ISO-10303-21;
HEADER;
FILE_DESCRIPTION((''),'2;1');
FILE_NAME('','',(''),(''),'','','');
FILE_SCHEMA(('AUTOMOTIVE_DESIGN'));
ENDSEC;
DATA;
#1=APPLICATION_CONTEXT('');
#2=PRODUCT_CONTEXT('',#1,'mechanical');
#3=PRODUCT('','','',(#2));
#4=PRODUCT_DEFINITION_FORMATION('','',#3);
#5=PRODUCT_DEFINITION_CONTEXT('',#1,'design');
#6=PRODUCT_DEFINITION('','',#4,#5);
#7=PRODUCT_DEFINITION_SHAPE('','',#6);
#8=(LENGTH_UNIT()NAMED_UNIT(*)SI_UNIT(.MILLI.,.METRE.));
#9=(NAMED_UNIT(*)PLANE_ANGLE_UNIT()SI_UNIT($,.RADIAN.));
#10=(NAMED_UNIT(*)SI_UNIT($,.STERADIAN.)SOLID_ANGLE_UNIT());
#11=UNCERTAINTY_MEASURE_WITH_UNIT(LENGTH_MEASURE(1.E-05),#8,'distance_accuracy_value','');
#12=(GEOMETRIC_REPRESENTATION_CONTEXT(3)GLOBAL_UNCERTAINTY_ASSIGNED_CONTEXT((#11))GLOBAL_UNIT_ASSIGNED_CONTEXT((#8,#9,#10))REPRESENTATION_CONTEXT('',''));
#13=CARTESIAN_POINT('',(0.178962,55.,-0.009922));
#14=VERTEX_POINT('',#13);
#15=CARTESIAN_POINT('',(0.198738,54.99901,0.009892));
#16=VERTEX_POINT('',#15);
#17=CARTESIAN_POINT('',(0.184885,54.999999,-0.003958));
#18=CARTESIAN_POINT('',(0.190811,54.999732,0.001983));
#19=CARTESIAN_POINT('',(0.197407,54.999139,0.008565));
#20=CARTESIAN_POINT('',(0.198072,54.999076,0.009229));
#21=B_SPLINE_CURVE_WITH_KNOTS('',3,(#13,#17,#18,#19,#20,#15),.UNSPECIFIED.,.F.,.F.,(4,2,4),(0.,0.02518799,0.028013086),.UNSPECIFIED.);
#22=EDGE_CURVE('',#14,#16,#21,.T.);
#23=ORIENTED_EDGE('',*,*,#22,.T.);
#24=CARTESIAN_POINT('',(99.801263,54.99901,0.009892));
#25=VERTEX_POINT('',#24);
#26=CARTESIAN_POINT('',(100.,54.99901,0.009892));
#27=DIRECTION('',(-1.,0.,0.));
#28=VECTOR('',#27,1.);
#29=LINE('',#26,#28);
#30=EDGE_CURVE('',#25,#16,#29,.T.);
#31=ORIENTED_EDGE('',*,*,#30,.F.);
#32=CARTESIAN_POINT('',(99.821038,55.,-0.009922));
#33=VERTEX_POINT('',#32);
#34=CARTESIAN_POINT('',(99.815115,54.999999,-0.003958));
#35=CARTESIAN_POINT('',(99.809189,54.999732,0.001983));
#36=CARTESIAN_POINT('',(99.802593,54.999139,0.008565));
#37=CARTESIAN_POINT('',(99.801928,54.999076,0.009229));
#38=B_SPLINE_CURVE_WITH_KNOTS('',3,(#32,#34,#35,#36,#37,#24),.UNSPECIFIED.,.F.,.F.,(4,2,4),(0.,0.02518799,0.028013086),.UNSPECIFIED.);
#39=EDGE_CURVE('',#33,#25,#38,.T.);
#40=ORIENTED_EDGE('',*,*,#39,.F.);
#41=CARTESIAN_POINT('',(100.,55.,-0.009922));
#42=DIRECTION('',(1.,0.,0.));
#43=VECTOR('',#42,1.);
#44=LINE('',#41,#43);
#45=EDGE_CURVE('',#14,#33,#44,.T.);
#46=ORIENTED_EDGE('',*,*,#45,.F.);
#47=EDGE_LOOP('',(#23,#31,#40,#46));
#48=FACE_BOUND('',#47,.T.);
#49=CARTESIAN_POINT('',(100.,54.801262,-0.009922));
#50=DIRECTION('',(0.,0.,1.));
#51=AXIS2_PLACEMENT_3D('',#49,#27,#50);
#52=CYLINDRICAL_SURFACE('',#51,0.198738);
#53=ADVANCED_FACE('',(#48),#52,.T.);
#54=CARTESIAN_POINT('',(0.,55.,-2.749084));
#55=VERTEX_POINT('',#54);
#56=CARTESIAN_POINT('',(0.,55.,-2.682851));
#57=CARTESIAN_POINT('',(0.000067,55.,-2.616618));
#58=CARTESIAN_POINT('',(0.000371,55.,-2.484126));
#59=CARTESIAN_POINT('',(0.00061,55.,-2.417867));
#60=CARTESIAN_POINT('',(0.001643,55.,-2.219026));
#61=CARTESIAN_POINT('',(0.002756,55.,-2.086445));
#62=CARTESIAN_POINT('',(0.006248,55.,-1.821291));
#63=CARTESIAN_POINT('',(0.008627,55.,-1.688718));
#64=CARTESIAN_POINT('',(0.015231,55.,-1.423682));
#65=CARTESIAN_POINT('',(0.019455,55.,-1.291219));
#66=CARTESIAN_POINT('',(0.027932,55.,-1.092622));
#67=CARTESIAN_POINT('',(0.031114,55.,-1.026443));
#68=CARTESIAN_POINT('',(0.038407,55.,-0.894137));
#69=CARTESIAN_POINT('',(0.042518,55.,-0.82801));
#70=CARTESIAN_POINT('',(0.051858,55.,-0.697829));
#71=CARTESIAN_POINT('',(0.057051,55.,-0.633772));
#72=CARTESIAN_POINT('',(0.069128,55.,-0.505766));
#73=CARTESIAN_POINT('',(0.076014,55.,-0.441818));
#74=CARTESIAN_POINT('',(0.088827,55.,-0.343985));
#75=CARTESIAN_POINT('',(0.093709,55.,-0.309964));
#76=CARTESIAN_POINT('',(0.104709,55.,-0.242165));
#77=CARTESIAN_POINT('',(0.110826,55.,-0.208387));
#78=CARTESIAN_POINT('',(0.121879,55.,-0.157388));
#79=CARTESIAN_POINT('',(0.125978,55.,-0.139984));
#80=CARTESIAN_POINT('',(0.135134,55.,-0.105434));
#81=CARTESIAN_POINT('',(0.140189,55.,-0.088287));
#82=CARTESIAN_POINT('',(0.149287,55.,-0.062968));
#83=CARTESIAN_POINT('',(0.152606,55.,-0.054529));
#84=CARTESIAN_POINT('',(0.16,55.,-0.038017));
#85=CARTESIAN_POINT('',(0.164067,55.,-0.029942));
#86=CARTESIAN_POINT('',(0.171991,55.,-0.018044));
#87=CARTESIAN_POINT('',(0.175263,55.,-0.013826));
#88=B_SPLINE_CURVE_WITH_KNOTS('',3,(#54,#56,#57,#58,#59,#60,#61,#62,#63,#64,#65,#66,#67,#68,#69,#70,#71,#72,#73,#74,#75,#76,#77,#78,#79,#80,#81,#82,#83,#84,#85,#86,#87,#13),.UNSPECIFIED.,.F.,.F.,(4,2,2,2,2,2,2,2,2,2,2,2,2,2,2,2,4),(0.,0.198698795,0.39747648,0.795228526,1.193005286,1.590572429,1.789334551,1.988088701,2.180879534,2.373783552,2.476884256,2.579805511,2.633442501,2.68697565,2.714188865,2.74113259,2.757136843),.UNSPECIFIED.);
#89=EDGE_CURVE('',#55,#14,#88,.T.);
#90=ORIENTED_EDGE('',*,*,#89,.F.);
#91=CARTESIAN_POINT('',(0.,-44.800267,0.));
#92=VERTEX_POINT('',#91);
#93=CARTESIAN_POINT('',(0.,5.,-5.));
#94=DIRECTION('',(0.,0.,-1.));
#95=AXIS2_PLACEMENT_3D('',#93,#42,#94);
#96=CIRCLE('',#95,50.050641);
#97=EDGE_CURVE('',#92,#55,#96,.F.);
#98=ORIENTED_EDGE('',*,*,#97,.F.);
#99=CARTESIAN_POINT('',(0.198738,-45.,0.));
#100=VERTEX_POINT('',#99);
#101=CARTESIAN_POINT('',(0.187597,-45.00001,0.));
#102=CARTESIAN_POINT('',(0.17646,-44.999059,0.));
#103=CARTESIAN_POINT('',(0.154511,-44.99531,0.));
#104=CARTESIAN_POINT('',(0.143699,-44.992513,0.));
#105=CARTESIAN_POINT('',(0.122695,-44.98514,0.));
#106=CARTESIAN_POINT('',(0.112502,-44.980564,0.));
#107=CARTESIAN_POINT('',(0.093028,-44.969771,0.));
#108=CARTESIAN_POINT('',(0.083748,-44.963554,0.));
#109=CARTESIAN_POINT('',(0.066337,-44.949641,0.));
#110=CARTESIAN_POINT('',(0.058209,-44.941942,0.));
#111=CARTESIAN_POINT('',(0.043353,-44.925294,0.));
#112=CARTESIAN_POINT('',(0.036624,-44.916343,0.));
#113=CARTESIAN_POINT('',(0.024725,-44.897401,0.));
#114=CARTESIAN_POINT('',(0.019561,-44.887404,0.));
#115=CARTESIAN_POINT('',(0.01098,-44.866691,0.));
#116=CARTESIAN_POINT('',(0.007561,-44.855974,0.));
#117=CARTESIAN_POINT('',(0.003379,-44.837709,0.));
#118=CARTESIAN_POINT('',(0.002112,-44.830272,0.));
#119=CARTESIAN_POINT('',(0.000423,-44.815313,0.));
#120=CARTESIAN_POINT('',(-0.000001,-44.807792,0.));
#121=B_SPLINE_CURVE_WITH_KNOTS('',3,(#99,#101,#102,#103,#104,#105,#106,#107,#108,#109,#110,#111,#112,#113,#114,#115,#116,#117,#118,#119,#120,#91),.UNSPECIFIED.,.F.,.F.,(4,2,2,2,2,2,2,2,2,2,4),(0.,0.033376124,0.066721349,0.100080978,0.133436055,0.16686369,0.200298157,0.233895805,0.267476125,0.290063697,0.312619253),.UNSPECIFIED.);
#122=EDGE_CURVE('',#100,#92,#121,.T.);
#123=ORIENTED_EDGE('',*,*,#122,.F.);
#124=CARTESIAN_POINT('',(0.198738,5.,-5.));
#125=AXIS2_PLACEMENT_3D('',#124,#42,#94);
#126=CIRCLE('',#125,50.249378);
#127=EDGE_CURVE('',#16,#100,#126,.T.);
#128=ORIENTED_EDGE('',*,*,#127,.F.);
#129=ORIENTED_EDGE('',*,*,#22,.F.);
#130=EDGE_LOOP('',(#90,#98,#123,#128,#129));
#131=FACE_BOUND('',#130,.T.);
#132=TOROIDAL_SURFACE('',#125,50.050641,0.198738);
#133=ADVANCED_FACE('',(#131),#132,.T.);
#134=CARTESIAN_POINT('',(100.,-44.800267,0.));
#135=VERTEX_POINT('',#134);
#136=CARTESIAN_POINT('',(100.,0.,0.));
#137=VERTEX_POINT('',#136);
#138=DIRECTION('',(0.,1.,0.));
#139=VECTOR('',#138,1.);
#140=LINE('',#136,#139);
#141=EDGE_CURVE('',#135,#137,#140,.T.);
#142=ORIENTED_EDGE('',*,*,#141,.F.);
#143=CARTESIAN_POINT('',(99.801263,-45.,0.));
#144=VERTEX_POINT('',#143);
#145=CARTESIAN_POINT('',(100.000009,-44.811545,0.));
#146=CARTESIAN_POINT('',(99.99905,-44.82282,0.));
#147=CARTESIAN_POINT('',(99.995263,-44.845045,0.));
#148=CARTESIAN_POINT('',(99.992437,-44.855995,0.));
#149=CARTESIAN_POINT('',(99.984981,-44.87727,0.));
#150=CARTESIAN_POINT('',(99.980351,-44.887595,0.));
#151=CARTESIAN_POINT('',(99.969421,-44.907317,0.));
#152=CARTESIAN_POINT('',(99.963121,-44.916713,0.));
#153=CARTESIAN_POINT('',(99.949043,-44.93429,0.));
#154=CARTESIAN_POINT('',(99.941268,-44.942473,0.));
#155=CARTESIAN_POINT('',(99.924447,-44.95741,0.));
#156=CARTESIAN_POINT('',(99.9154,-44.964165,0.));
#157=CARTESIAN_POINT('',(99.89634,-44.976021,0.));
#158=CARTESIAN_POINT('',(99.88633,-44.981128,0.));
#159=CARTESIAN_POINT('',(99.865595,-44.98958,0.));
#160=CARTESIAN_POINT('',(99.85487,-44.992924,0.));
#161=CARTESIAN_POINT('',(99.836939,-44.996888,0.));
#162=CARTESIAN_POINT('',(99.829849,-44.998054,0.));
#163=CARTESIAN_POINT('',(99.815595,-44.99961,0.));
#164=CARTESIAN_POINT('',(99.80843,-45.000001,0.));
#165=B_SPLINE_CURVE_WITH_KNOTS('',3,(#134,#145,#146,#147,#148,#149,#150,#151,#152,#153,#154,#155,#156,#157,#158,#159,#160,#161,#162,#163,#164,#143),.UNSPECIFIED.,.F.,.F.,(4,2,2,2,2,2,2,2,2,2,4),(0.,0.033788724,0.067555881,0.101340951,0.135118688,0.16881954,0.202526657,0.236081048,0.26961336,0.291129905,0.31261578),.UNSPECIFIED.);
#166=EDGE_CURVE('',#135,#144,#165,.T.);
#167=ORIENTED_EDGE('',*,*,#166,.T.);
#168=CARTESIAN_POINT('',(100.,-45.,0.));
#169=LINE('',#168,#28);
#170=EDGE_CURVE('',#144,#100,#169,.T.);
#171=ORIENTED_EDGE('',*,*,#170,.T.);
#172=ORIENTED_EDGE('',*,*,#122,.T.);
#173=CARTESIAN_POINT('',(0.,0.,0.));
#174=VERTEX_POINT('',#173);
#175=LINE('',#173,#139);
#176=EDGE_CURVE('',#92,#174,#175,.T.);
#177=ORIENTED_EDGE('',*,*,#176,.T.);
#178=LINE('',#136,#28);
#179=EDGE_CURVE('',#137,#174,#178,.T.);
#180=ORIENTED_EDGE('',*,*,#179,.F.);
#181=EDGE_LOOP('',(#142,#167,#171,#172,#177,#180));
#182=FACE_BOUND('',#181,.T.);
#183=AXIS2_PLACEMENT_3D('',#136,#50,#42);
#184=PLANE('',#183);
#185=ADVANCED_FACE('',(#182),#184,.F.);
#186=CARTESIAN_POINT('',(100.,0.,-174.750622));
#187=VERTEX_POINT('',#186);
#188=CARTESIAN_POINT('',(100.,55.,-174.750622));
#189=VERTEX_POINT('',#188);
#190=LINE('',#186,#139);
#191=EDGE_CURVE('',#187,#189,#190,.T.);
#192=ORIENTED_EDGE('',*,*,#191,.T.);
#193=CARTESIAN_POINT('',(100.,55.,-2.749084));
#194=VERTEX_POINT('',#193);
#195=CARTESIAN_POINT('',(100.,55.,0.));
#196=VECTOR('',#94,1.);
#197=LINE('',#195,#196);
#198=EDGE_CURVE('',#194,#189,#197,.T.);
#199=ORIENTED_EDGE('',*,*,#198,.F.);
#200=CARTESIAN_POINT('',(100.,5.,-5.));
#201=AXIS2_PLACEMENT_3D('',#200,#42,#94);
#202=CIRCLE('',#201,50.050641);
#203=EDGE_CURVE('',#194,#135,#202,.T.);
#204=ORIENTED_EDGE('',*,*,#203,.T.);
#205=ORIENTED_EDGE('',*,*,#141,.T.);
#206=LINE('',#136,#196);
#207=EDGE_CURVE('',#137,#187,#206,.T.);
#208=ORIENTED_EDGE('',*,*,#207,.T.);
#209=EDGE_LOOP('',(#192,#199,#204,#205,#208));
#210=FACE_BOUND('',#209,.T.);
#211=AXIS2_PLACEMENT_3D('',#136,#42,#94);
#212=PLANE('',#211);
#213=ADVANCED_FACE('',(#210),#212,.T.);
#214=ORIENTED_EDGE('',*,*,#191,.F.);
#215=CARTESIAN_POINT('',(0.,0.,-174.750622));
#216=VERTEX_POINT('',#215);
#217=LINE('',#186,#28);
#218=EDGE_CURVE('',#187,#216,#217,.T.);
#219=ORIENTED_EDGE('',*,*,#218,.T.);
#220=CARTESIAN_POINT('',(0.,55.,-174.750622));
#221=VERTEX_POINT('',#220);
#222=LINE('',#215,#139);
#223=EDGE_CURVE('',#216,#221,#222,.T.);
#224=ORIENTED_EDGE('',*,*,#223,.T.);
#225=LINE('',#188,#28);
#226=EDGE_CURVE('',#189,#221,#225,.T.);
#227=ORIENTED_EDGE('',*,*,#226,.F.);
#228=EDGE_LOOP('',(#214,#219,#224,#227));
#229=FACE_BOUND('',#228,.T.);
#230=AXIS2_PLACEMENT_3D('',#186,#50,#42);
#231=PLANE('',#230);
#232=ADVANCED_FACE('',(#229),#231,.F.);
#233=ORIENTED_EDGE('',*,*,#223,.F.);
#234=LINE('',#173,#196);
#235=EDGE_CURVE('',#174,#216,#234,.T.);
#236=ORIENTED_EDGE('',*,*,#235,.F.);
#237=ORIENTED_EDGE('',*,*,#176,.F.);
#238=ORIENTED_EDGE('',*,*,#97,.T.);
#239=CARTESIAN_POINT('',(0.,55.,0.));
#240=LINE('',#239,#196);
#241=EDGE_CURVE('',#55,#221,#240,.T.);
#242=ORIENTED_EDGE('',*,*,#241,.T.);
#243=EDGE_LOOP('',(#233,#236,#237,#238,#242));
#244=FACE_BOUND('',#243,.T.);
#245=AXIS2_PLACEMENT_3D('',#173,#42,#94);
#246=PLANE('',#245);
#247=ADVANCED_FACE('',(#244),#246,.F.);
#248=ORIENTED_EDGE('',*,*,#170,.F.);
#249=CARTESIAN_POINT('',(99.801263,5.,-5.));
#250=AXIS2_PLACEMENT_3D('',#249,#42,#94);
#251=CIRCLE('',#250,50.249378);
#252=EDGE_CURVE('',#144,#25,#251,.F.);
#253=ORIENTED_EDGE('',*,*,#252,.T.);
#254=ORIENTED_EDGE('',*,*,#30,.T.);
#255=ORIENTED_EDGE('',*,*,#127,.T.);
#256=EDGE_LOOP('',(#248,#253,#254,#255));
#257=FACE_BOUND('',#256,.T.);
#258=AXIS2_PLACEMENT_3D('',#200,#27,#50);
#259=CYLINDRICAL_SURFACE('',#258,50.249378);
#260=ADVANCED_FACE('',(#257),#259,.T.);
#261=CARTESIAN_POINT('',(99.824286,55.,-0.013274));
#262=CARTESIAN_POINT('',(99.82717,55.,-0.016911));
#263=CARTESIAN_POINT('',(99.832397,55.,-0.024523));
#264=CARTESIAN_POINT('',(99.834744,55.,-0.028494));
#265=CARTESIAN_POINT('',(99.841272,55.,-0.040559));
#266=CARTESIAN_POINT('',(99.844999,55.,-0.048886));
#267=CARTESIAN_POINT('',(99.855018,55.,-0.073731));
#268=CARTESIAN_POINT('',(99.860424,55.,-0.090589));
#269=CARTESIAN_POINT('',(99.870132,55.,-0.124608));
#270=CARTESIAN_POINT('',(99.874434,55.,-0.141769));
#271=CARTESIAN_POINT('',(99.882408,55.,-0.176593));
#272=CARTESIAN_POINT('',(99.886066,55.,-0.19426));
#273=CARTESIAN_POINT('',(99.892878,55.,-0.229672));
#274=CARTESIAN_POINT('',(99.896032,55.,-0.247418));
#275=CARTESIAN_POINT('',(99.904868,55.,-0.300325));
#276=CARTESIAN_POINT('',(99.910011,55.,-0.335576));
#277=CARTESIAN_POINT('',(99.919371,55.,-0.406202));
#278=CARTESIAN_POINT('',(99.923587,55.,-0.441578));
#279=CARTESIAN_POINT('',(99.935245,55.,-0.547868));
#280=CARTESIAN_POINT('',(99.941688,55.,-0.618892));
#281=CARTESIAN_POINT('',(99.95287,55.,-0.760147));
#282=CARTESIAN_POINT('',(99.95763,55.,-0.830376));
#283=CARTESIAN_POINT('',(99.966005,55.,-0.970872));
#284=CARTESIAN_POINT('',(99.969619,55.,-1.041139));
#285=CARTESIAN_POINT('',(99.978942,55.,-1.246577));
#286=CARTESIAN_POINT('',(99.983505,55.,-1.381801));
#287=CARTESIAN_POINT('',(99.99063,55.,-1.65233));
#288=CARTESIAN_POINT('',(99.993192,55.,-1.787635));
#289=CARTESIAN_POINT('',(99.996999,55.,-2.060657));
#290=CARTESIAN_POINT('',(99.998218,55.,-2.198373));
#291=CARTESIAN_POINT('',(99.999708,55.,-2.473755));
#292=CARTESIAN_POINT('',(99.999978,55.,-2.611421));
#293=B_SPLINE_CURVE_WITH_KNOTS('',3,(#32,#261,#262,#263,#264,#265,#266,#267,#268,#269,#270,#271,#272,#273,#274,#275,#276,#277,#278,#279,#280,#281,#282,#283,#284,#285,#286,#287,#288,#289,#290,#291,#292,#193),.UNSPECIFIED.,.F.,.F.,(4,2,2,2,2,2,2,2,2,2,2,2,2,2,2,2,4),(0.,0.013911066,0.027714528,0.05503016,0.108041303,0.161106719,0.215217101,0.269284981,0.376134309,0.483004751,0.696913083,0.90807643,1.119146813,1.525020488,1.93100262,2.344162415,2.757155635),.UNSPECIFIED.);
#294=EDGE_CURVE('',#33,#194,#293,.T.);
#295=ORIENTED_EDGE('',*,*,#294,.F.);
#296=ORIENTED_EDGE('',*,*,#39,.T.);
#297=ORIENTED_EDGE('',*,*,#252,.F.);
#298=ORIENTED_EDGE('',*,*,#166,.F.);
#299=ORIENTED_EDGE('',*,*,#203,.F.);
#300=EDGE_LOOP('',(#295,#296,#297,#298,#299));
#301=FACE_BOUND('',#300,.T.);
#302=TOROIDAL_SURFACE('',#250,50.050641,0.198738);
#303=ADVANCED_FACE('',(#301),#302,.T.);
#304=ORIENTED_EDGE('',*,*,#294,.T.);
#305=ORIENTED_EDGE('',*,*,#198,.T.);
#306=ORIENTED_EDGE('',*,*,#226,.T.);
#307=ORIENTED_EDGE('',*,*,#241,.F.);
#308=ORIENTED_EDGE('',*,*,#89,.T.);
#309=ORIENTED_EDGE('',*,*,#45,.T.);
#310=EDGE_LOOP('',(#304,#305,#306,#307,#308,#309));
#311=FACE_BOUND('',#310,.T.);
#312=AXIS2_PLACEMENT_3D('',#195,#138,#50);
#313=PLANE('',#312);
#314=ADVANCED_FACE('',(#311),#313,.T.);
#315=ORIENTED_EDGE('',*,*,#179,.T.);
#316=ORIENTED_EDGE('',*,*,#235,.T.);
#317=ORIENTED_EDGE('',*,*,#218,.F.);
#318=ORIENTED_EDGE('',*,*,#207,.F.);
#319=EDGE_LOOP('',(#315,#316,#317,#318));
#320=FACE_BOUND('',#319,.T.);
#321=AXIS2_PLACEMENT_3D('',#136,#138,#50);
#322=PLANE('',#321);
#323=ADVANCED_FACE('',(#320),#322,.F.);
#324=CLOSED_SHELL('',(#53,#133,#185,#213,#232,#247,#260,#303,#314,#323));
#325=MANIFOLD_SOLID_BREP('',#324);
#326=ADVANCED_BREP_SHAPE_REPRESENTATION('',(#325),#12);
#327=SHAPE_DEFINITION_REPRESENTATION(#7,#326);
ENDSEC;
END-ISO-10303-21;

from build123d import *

# Parameters (mm, degrees)
SKETCH2_W           = 174.75062189439555
SKETCH2_H           = 55.00000000000001
BOSS_EXTRUDE1_DEPTH = 100
FILLET1_ANGLE       = 171.711787


with BuildPart() as part:
    # Sketch2 → Boss-Extrude1 (new body)
    with BuildSketch(Plane(origin=(0, 0, 0), x_dir=(0, 0, -1), z_dir=(1, 0, 0))):
        with Locations((87.37531094719778, 27.500000000000004)):
            Rectangle(SKETCH2_W, SKETCH2_H)
        with BuildLine():
            Line((0, 0), (0, 55.00000000000001))
            ThreePointArc((0, 55.00000000000001), (-45.24937810560445, 5.000000000000011), (5.51e-15, -45))
            Line((5.51e-15, -45), (0, 0))
        make_face()
    extrude(amount=BOSS_EXTRUDE1_DEPTH)

    # Fillet1: read off the stored shape, not the designer's step
    # Fillet1 outline → Fillet1 (revolve, cut)
    with BuildSketch(Plane(origin=(0, 5, -5), x_dir=(0, 0.998988212638407, 0.04497278076260073), z_dir=(0, 0.04497278076260073, -0.998988212638407))):
        with BuildLine():
            ThreePointArc((50.249378106, 0.1987375), (50.19116924, 0.058208866), (50.050640606, 0))
            Line((50.050640606, 0), (50.249378106, 0))
            Line((50.249378106, 0), (50.249378106, 0.1987375))
        make_face()
        with BuildLine():
            ThreePointArc((50.050640606, 100), (50.19116924, 99.941791134), (50.249378106, 99.8012625))
            Line((50.249378106, 99.8012625), (50.249378106, 100))
            Line((50.249378106, 100), (50.050640606, 100))
        make_face()
    revolve(axis=Axis((0, 5, -5), (1, 0, 0)), revolution_arc=FILLET1_ANGLE, mode=Mode.SUBTRACT)


solid = part.part
